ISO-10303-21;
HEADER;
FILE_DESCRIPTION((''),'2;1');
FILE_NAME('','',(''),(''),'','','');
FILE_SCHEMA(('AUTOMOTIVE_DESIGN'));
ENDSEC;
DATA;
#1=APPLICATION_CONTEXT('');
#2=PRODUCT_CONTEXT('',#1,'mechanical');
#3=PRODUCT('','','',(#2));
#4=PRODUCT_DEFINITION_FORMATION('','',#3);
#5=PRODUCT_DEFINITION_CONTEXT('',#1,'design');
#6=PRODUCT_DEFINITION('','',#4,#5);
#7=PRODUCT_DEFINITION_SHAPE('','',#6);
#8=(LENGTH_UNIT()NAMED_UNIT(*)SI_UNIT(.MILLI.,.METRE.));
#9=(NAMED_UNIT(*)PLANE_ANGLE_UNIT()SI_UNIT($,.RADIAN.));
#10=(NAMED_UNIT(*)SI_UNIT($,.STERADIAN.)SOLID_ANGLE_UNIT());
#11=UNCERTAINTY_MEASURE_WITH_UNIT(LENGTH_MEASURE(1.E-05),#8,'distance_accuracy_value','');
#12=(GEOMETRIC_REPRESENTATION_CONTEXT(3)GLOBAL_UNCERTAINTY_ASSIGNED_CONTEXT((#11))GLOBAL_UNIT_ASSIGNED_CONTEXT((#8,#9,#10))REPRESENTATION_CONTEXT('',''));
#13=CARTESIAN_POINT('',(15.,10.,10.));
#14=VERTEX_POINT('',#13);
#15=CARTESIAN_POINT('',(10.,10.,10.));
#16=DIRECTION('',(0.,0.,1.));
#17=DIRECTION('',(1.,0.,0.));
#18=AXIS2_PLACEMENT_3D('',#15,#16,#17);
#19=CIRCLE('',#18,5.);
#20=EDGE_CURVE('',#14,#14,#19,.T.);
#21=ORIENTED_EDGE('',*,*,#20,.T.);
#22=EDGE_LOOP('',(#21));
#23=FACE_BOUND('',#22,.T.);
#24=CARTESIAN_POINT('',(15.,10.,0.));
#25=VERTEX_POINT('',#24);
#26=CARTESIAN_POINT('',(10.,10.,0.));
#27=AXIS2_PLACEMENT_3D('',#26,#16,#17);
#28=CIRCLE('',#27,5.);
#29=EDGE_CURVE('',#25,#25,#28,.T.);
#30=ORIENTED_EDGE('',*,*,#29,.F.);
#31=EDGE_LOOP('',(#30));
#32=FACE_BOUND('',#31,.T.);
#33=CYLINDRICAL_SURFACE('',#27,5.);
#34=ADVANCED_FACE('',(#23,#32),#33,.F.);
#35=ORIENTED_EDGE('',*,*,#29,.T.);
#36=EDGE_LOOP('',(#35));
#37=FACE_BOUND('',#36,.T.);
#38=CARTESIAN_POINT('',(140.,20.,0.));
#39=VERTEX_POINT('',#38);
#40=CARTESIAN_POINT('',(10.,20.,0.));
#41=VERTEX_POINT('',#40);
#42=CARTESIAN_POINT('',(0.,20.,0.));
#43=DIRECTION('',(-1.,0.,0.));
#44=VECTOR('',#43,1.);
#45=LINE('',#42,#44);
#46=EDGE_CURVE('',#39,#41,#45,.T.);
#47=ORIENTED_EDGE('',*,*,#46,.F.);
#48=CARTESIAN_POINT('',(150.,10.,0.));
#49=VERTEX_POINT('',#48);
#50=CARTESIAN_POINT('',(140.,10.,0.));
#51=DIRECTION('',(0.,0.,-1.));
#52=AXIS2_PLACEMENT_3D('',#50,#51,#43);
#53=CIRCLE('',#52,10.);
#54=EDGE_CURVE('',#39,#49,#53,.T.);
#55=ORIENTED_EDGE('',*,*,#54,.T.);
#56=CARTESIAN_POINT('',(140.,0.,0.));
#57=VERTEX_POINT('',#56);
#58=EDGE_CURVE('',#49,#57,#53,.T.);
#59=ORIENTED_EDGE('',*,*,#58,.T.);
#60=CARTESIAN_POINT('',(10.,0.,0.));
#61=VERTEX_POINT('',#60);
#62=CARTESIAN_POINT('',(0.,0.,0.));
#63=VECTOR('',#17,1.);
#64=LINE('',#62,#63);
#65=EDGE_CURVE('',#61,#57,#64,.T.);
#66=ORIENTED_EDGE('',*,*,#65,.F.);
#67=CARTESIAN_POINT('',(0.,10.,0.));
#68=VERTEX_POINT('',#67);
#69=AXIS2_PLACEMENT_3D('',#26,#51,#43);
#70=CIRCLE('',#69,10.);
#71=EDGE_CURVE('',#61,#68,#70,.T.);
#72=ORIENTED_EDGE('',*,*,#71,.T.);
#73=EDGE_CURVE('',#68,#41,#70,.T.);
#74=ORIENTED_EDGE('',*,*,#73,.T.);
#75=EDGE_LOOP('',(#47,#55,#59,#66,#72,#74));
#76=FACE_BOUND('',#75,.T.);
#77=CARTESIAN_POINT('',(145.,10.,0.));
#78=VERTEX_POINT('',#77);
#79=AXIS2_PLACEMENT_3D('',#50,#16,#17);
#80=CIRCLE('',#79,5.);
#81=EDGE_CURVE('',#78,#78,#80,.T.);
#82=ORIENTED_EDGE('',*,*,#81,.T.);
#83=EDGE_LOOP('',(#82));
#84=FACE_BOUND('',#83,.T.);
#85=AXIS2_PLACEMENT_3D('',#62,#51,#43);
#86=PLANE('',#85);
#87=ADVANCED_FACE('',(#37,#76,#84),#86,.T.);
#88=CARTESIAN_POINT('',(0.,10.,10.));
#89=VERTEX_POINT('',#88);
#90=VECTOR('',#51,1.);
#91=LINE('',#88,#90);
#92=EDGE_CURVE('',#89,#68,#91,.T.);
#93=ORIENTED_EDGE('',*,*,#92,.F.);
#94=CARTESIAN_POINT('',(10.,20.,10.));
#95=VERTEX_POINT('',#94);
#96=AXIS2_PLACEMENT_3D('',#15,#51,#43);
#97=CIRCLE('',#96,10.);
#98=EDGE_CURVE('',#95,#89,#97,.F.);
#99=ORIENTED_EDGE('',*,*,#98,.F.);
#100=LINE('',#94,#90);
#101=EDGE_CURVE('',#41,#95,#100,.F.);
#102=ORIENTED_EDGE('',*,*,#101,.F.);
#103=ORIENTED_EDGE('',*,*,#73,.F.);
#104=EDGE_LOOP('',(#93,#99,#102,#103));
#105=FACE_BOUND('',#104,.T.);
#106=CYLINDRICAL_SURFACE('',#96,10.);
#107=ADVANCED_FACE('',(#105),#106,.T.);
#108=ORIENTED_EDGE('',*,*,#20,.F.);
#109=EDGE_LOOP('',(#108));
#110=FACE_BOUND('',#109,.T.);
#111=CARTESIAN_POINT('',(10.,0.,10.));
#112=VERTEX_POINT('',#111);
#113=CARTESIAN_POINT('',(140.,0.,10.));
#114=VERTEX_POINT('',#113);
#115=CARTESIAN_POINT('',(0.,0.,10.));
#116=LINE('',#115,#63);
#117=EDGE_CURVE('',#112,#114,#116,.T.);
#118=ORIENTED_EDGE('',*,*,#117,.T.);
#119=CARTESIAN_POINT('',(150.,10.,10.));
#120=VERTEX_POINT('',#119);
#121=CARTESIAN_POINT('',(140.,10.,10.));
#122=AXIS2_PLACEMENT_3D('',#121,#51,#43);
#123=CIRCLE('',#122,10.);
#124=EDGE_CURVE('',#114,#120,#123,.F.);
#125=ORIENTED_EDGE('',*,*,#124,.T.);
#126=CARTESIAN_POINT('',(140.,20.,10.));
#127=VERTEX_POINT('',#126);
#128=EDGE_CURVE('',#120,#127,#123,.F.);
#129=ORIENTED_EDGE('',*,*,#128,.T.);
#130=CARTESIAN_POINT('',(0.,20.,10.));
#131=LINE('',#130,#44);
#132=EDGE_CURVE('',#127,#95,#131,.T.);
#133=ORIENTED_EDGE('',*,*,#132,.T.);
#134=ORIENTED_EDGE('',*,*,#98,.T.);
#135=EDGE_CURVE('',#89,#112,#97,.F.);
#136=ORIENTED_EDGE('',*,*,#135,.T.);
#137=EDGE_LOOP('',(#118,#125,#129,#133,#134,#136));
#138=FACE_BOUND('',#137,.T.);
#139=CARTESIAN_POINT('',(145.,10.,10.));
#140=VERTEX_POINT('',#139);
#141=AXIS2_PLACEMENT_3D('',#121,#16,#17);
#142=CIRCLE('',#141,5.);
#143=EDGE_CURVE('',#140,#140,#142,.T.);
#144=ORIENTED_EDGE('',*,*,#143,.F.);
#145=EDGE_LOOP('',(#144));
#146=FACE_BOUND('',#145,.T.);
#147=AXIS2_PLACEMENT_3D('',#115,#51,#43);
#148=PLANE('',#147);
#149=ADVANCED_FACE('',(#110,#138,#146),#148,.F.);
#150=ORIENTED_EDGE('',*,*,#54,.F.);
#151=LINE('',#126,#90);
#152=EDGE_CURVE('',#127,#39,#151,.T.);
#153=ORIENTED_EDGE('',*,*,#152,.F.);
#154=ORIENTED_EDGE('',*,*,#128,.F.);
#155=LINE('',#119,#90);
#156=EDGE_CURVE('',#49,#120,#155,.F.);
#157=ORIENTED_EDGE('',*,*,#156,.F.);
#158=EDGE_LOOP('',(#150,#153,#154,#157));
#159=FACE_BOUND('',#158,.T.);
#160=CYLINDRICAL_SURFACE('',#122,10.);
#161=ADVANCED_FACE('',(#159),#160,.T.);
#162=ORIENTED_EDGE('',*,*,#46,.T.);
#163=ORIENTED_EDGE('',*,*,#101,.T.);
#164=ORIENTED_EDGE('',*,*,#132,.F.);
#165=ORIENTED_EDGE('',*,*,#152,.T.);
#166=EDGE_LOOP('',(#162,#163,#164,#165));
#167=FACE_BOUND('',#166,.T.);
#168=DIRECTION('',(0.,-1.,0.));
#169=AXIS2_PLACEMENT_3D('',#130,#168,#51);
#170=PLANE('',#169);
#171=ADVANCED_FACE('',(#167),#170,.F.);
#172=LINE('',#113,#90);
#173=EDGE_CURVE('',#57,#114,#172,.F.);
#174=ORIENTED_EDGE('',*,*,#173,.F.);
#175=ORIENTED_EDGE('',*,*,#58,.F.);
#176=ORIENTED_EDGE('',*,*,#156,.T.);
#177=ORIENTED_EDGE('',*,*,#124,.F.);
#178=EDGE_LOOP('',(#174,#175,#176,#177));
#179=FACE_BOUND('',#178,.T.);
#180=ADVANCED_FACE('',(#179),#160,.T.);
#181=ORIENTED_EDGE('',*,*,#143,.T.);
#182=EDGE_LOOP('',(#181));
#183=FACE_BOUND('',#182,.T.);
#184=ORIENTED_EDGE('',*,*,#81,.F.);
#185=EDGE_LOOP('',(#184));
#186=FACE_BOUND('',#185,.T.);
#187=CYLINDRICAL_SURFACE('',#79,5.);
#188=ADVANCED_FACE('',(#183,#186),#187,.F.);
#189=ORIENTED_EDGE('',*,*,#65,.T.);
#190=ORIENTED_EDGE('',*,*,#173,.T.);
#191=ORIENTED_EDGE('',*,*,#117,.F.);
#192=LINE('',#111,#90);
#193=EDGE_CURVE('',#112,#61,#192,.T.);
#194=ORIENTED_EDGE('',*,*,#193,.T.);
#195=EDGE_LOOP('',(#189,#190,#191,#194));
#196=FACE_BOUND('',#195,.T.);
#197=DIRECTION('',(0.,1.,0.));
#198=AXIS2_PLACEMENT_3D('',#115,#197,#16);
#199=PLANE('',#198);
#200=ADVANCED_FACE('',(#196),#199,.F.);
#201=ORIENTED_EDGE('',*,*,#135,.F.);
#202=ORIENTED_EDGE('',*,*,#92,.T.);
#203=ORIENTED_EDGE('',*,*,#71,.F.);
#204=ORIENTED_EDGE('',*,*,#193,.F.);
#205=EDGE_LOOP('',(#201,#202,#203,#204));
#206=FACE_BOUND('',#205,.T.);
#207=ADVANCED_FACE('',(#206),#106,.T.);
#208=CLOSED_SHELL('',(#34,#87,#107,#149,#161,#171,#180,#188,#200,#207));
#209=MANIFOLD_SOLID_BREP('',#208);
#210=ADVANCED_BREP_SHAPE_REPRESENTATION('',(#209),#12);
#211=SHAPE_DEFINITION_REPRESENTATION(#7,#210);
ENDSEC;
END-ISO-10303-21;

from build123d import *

# Parameters (mm, degrees)
SKETCH1_W           = 150
SKETCH1_H           = 20
BOSS_EXTRUDE1_DEPTH = 10
FILLET1_R           = 10
SKETCH2_R           = 5
CUT_EXTRUDE1_DEPTH  = 152.657508881


with BuildPart() as part:
    # Sketch1 → Boss-Extrude1 (new body)
    with BuildSketch(Plane.XY):
        with Locations((75, 10)):
            Rectangle(SKETCH1_W, SKETCH1_H)
    extrude(amount=BOSS_EXTRUDE1_DEPTH)

    # Fillet1
    fillet1_edges = [part.edges().sort_by_distance(p)[0] for p in [
        (0, 0, 5),
        (150, 0, 5),
        (150, 20, 5),
        (0, 20, 5),
    ]]
    fillet(fillet1_edges, radius=FILLET1_R - 0.0001)  # a hair under: the kernel refuses the full size

    # Sketch2 → Cut-Extrude1 (cut, through all)
    with BuildSketch(Plane.XY.offset(10)):
        with Locations((10, 10)):
            Circle(SKETCH2_R)
        with Locations((140, 10)):
            Circle(SKETCH2_R)
    extrude(amount=-CUT_EXTRUDE1_DEPTH, mode=Mode.SUBTRACT)


solid = part.part
